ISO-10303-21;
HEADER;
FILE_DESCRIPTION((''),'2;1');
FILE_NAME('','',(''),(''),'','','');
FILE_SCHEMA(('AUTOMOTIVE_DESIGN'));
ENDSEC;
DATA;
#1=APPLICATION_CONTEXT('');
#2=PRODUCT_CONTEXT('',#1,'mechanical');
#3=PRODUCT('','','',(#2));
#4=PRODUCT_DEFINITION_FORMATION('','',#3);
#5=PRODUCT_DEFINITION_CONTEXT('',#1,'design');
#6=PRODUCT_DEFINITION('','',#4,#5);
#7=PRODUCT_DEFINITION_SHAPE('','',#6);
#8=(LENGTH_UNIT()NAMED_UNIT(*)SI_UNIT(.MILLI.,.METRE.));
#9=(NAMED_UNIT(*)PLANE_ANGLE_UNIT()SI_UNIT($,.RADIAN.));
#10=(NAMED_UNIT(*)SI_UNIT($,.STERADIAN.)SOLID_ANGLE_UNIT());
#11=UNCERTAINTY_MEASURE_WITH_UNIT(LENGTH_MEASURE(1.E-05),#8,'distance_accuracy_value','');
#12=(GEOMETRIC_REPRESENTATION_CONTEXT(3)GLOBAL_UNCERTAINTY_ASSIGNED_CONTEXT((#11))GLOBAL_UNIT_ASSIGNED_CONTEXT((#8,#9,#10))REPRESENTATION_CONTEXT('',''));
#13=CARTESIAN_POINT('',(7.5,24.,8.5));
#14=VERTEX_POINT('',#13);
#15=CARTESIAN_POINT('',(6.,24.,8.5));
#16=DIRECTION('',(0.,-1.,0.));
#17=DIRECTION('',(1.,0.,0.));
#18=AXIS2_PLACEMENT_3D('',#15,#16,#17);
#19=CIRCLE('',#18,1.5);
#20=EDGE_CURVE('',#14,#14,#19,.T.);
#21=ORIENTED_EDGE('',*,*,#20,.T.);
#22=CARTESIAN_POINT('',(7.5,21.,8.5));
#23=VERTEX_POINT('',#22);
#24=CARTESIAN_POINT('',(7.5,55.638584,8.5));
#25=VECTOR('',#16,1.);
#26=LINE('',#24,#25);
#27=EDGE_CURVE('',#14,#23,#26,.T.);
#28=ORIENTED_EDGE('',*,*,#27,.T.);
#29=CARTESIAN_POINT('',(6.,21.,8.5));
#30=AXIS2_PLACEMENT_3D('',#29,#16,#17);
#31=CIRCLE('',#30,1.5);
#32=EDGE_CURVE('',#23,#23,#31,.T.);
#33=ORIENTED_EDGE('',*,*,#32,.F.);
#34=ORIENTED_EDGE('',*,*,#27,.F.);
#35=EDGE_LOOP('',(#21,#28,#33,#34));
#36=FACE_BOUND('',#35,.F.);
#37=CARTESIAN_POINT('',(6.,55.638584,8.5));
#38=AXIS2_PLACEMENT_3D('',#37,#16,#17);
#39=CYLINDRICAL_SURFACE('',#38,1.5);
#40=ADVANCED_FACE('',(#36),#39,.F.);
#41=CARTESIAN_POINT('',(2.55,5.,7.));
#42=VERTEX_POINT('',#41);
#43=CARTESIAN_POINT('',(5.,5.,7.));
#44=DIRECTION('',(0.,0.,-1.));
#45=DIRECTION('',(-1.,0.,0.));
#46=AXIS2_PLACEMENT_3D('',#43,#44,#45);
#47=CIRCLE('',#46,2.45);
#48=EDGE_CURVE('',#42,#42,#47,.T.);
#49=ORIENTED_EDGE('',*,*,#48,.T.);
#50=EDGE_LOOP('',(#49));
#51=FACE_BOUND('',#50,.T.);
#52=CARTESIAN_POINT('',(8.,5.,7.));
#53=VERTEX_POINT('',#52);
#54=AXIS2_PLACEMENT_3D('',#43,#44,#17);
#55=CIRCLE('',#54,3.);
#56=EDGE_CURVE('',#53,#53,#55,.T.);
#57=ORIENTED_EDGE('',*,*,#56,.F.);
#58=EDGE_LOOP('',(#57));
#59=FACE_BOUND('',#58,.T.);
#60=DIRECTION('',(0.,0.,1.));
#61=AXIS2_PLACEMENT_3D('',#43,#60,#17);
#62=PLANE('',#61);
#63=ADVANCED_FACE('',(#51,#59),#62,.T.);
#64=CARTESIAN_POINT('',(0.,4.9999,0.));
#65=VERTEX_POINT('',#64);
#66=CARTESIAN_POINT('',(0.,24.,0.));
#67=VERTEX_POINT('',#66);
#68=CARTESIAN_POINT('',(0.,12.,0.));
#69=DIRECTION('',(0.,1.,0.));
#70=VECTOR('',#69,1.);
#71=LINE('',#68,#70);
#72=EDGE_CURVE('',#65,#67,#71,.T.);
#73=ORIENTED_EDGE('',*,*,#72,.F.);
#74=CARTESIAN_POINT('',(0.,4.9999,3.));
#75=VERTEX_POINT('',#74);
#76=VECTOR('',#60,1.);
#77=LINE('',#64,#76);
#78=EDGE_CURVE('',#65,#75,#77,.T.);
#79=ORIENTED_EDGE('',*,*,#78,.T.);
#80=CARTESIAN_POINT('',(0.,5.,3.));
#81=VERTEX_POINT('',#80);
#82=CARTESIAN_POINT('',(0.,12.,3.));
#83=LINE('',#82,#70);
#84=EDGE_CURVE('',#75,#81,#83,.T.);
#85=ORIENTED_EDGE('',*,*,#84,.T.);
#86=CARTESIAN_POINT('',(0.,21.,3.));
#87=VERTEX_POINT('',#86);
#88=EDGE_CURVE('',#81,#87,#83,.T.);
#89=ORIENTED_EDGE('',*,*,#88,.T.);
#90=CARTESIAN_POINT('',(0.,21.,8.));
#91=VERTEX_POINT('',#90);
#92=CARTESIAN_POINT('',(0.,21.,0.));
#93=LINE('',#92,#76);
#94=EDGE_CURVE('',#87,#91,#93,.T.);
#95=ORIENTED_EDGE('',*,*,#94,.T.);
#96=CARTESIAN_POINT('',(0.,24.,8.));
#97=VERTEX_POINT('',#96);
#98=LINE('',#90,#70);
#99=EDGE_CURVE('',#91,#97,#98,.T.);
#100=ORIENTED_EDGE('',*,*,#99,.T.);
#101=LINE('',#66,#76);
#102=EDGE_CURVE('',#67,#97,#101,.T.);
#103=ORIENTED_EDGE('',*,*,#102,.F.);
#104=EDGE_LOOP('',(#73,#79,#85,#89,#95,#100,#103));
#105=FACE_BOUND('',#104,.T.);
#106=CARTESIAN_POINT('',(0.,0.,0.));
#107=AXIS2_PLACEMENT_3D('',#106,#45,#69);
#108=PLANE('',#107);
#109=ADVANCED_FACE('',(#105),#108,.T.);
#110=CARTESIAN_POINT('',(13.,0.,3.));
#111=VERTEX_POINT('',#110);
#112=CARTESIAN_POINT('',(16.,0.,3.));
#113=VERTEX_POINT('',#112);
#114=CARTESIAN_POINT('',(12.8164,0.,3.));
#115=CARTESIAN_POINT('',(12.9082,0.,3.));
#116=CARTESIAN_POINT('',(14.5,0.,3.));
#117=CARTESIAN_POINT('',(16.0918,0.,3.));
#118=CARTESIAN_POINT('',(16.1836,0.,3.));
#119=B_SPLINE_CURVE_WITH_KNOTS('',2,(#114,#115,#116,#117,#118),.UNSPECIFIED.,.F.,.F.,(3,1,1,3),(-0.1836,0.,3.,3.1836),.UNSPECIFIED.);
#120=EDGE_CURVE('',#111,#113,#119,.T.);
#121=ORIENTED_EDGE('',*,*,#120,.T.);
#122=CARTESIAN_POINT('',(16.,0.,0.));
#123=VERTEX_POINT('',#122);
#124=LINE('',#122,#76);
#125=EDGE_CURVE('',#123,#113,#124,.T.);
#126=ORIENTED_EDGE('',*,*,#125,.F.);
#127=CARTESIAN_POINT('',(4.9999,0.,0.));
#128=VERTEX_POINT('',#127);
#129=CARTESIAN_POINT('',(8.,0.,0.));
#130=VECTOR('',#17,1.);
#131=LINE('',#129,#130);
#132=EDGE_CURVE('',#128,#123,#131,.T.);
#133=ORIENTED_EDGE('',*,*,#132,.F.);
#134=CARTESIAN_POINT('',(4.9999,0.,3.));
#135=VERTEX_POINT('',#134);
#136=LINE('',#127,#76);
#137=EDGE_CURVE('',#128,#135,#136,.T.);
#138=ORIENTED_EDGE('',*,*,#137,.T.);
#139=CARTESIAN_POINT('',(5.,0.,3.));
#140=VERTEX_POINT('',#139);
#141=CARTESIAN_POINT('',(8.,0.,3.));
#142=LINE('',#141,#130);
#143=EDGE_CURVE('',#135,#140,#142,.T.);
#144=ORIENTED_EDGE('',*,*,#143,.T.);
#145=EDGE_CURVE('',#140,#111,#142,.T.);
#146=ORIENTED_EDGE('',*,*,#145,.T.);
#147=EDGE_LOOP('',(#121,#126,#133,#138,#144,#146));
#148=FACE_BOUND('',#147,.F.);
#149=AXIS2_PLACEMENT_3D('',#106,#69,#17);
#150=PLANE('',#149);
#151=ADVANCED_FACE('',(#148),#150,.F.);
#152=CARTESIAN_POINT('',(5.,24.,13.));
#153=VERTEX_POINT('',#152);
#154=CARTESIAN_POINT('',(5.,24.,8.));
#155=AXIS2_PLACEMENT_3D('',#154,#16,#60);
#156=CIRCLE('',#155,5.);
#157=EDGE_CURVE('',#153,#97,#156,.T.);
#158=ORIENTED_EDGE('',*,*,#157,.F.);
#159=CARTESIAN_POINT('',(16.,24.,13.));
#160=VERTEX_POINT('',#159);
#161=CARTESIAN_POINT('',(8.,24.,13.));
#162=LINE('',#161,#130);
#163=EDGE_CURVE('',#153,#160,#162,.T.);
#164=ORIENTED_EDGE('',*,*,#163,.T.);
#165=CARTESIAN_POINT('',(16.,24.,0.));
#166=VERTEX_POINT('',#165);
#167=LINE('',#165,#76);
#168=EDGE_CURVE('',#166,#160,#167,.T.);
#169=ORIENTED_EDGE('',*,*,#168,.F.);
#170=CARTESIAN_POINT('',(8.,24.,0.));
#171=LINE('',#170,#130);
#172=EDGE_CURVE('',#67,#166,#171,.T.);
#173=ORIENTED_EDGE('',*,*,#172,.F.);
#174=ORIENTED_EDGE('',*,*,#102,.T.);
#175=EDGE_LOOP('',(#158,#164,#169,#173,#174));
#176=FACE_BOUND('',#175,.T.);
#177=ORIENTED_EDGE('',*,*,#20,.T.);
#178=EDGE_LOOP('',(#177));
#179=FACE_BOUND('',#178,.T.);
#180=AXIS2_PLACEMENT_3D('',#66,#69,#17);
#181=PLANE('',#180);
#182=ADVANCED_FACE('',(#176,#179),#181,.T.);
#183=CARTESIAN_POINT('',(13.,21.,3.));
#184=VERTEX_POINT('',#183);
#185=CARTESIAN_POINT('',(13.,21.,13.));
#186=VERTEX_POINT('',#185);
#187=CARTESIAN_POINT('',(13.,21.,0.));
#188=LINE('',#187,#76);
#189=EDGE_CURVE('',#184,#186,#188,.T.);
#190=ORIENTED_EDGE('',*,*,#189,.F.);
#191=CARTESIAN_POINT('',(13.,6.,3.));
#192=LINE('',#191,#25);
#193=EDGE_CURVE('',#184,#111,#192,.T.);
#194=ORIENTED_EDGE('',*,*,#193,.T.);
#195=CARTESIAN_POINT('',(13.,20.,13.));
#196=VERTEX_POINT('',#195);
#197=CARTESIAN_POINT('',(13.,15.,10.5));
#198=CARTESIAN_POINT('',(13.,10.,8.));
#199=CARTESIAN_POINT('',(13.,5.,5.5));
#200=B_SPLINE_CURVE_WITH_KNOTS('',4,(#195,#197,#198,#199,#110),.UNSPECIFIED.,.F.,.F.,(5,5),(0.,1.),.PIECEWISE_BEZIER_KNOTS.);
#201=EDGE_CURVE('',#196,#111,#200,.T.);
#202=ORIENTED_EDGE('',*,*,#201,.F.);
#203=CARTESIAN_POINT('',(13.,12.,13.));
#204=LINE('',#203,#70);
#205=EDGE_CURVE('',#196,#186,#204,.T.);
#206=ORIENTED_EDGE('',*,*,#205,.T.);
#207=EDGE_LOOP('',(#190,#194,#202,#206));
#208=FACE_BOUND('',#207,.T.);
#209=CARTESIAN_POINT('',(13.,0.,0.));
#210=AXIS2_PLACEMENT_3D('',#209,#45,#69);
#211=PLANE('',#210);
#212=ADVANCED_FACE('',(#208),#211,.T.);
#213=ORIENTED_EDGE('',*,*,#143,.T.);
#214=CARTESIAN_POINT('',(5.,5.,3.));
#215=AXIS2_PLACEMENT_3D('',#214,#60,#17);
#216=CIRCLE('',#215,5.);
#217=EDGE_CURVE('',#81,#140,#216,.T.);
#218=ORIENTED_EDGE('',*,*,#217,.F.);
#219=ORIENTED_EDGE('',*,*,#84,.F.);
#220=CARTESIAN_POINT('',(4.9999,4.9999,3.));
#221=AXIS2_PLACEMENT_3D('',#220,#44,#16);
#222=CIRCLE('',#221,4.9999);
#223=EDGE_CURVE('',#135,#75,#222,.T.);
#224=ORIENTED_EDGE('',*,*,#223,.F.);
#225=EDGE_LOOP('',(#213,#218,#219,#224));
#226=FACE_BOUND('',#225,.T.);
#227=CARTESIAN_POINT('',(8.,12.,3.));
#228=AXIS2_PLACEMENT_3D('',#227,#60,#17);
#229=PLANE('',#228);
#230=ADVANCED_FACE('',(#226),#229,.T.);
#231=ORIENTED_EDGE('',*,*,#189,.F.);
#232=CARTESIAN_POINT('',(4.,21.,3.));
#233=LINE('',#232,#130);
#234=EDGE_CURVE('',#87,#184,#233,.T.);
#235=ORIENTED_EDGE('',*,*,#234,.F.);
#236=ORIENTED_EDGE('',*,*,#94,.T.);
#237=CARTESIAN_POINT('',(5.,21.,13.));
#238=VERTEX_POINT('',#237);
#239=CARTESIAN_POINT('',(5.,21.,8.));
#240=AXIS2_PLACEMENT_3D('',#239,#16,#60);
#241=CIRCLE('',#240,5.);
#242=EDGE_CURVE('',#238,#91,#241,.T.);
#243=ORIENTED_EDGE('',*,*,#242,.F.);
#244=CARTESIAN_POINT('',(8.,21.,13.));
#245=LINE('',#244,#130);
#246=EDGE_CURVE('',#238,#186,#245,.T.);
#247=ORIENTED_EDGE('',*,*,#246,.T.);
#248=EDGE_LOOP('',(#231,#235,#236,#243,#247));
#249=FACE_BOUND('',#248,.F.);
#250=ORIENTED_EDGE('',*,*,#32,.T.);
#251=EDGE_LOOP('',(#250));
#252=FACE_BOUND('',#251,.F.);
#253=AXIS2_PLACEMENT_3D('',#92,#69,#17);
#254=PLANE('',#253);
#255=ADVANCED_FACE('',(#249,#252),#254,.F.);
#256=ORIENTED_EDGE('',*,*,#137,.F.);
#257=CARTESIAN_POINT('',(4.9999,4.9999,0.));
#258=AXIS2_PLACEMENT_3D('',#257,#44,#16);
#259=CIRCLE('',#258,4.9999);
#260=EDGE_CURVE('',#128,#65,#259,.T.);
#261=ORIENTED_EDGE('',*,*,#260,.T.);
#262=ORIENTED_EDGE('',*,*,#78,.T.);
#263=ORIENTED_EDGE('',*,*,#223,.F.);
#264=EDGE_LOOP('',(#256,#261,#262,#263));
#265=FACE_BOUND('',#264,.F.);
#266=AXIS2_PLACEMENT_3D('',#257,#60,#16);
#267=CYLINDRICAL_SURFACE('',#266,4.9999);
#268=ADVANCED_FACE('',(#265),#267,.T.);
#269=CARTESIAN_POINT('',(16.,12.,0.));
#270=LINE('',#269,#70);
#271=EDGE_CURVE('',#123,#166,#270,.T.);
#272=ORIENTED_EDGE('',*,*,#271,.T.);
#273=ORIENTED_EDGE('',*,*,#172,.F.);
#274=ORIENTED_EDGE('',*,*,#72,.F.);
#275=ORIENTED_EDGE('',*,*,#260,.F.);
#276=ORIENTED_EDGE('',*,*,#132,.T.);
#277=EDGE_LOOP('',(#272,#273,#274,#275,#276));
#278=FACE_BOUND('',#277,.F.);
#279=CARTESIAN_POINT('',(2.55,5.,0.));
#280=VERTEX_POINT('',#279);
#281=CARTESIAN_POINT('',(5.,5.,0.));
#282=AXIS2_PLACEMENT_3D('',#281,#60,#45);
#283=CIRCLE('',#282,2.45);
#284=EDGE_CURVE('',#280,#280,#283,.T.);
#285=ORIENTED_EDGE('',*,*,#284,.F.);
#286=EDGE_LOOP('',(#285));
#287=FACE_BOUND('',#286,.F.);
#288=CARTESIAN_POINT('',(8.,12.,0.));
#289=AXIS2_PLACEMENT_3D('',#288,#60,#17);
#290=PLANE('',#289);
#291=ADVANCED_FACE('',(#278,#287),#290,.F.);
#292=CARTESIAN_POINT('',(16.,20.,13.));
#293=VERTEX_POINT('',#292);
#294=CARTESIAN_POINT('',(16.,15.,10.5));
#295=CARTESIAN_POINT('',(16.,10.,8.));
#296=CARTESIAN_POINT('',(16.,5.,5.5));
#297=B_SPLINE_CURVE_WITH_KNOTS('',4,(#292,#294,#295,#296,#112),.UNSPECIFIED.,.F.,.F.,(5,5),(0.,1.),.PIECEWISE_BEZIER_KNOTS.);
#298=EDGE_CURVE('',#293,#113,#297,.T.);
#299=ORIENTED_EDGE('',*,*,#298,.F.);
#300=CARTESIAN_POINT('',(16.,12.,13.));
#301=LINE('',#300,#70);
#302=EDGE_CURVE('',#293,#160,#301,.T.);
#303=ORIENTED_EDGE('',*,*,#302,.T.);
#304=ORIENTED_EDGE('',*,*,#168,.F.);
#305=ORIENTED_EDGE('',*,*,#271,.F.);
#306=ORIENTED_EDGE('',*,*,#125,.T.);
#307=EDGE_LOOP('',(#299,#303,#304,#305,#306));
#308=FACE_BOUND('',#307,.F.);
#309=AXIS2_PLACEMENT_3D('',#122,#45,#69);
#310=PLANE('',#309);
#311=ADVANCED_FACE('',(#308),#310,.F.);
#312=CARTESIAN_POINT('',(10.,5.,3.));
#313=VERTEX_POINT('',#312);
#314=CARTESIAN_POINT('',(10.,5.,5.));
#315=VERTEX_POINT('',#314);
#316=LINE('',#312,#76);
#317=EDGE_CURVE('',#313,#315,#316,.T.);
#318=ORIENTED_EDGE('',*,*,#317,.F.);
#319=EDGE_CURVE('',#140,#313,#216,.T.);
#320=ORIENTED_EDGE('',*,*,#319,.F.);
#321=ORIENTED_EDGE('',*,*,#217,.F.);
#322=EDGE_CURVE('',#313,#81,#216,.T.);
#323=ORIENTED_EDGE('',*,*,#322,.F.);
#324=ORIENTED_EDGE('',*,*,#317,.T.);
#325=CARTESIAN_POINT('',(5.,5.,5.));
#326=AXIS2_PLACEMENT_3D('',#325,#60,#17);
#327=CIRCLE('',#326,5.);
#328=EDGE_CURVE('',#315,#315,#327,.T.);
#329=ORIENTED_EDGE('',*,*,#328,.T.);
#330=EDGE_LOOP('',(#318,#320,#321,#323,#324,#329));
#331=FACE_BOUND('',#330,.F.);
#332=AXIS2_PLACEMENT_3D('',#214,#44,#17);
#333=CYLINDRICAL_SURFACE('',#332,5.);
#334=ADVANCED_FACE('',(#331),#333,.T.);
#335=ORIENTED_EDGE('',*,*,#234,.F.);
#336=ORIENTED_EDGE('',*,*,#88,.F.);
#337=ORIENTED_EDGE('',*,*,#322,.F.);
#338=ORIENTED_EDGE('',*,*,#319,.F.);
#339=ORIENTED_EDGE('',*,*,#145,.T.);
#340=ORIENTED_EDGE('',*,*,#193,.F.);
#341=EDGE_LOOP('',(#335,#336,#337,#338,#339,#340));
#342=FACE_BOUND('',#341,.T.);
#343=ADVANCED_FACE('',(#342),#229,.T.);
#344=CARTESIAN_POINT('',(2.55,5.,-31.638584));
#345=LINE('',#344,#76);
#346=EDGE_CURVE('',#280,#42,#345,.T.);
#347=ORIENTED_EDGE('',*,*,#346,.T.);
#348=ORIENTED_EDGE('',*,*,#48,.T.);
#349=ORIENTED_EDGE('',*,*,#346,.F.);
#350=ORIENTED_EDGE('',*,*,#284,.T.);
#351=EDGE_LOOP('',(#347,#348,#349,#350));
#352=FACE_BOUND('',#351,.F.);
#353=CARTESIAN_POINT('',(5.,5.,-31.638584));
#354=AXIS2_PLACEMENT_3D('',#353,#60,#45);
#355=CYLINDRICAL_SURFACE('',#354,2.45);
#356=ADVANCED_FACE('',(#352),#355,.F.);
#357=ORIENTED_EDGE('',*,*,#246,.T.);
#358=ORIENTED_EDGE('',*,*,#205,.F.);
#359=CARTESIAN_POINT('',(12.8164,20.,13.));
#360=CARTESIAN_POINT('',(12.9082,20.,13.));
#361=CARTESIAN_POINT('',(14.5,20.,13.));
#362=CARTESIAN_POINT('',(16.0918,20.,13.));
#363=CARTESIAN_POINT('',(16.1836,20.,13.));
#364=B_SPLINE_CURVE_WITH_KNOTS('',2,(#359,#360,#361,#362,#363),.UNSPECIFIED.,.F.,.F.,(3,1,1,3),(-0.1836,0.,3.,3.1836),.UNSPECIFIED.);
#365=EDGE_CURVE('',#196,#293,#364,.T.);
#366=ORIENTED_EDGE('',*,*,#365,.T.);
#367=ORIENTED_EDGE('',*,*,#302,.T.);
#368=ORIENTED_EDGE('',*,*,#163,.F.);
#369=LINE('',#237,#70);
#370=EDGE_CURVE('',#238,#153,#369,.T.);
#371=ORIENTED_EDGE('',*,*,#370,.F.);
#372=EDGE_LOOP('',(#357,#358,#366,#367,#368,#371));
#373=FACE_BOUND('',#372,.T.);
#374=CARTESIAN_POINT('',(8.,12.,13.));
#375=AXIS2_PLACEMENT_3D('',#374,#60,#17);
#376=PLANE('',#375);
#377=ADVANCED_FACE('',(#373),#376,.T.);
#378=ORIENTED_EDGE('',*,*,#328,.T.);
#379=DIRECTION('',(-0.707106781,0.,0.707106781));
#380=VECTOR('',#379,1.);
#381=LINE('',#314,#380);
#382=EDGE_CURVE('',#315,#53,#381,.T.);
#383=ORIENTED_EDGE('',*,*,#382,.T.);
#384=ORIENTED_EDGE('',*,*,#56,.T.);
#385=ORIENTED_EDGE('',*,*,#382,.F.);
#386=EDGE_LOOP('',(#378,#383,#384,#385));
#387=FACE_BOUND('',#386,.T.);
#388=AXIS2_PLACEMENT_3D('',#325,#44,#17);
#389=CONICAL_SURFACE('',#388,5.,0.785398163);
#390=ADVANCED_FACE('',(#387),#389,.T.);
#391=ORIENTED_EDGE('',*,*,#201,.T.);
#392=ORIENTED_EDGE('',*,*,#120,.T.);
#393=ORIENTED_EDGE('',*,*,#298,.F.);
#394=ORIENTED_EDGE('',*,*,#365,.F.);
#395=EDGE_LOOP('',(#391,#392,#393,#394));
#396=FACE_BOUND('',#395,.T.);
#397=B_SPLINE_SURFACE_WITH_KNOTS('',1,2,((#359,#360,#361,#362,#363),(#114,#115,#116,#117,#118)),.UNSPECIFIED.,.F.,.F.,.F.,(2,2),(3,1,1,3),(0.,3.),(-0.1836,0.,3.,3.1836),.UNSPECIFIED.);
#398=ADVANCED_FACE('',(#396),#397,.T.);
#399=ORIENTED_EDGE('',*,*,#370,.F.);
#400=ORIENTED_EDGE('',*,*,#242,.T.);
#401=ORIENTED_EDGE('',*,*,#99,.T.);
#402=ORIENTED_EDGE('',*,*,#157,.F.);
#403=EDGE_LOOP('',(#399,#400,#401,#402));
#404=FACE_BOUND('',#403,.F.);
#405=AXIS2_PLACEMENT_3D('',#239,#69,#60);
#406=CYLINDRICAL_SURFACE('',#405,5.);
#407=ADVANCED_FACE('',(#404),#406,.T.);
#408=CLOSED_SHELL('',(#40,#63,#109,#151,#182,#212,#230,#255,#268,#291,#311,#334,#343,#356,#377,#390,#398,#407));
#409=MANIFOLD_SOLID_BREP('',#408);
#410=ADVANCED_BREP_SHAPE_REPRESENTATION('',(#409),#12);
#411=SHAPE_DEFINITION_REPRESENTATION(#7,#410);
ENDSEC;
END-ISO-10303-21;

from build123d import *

# Parameters (mm, degrees)
F0_W     = 16
F0_H     = 24
F1_DEPTH = 13
F2_T     = -3
F3_R     = 5
F4_DEPTH = 4
F5_D     = 4.9
F6_SIZE2 = 10
F6_SIZE  = 20
F7_R     = 5
F8_SIZE  = 2
F10_D    = 3
F11_R    = 4.9999


# Not quite as in the source:
# - a fillet or chamfer is up to 0.001 mm smaller than in the source, because OpenCascade refuses the exact size


with BuildPart() as f1:
    # F0 (on Top) → F1 (new body)
    with BuildSketch(Plane.XY):
        with Locations((8, 12)):
            Rectangle(F0_W, F0_H)
    extrude(amount=F1_DEPTH)

    # F2
    f2_openings = [f1.faces().sort_by_distance(p)[0] for p in [
        (8, 0, 6.5),
        (0, 12, 6.5),
        (8, 12, 13),
    ]]
    offset(amount=F2_T, openings=f2_openings)

    # F3 (on face) → F4 (join)
    with BuildSketch(Plane.XY.offset(3)):
        with Locations((5, 5)):
            Circle(F3_R)
    extrude(amount=F4_DEPTH)

    # F5 (through all)
    with Locations(Plane(origin=(0, 0, 0), x_dir=(1, 0, 0), z_dir=(0, 0, -1))):
        with Locations((5, -5)):
            Hole(F5_D / 2)

    # F6
    f6_edges = [f1.edges().sort_by_distance(p)[0] for p in [
        (14.5, 0, 13),
    ]]
    f6_side = f1.faces().sort_by_distance((8, 23.711556, 13))[0]
    chamfer(f6_edges, length=F6_SIZE, length2=F6_SIZE2, reference=f6_side)

    # F7
    f7_edges = [f1.edges().sort_by_distance(p)[0] for p in [
        (0, 22.5, 13),
    ]]
    fillet(f7_edges, radius=F7_R)

    # F8
    f8_edges = [f1.edges().sort_by_distance(p)[0] for p in [
        (0, 5, 7),
    ]]
    chamfer(f8_edges, length=F8_SIZE)

    # F10 (through all)
    with Locations(Plane(origin=(0, 24, 0), x_dir=(-1, 0, 0), z_dir=(0, 1, 0))):
        with Locations((-6, 8.5)):
            Hole(F10_D / 2)

    # F11 (radius 5 in the source; OpenCascade refuses exactly that, so slightly less here)
    f11_edges = [f1.edges().sort_by_distance(p)[0] for p in [
        (0, 0, 1.5),
    ]]
    fillet(f11_edges, radius=F11_R)


solid = f1.part
